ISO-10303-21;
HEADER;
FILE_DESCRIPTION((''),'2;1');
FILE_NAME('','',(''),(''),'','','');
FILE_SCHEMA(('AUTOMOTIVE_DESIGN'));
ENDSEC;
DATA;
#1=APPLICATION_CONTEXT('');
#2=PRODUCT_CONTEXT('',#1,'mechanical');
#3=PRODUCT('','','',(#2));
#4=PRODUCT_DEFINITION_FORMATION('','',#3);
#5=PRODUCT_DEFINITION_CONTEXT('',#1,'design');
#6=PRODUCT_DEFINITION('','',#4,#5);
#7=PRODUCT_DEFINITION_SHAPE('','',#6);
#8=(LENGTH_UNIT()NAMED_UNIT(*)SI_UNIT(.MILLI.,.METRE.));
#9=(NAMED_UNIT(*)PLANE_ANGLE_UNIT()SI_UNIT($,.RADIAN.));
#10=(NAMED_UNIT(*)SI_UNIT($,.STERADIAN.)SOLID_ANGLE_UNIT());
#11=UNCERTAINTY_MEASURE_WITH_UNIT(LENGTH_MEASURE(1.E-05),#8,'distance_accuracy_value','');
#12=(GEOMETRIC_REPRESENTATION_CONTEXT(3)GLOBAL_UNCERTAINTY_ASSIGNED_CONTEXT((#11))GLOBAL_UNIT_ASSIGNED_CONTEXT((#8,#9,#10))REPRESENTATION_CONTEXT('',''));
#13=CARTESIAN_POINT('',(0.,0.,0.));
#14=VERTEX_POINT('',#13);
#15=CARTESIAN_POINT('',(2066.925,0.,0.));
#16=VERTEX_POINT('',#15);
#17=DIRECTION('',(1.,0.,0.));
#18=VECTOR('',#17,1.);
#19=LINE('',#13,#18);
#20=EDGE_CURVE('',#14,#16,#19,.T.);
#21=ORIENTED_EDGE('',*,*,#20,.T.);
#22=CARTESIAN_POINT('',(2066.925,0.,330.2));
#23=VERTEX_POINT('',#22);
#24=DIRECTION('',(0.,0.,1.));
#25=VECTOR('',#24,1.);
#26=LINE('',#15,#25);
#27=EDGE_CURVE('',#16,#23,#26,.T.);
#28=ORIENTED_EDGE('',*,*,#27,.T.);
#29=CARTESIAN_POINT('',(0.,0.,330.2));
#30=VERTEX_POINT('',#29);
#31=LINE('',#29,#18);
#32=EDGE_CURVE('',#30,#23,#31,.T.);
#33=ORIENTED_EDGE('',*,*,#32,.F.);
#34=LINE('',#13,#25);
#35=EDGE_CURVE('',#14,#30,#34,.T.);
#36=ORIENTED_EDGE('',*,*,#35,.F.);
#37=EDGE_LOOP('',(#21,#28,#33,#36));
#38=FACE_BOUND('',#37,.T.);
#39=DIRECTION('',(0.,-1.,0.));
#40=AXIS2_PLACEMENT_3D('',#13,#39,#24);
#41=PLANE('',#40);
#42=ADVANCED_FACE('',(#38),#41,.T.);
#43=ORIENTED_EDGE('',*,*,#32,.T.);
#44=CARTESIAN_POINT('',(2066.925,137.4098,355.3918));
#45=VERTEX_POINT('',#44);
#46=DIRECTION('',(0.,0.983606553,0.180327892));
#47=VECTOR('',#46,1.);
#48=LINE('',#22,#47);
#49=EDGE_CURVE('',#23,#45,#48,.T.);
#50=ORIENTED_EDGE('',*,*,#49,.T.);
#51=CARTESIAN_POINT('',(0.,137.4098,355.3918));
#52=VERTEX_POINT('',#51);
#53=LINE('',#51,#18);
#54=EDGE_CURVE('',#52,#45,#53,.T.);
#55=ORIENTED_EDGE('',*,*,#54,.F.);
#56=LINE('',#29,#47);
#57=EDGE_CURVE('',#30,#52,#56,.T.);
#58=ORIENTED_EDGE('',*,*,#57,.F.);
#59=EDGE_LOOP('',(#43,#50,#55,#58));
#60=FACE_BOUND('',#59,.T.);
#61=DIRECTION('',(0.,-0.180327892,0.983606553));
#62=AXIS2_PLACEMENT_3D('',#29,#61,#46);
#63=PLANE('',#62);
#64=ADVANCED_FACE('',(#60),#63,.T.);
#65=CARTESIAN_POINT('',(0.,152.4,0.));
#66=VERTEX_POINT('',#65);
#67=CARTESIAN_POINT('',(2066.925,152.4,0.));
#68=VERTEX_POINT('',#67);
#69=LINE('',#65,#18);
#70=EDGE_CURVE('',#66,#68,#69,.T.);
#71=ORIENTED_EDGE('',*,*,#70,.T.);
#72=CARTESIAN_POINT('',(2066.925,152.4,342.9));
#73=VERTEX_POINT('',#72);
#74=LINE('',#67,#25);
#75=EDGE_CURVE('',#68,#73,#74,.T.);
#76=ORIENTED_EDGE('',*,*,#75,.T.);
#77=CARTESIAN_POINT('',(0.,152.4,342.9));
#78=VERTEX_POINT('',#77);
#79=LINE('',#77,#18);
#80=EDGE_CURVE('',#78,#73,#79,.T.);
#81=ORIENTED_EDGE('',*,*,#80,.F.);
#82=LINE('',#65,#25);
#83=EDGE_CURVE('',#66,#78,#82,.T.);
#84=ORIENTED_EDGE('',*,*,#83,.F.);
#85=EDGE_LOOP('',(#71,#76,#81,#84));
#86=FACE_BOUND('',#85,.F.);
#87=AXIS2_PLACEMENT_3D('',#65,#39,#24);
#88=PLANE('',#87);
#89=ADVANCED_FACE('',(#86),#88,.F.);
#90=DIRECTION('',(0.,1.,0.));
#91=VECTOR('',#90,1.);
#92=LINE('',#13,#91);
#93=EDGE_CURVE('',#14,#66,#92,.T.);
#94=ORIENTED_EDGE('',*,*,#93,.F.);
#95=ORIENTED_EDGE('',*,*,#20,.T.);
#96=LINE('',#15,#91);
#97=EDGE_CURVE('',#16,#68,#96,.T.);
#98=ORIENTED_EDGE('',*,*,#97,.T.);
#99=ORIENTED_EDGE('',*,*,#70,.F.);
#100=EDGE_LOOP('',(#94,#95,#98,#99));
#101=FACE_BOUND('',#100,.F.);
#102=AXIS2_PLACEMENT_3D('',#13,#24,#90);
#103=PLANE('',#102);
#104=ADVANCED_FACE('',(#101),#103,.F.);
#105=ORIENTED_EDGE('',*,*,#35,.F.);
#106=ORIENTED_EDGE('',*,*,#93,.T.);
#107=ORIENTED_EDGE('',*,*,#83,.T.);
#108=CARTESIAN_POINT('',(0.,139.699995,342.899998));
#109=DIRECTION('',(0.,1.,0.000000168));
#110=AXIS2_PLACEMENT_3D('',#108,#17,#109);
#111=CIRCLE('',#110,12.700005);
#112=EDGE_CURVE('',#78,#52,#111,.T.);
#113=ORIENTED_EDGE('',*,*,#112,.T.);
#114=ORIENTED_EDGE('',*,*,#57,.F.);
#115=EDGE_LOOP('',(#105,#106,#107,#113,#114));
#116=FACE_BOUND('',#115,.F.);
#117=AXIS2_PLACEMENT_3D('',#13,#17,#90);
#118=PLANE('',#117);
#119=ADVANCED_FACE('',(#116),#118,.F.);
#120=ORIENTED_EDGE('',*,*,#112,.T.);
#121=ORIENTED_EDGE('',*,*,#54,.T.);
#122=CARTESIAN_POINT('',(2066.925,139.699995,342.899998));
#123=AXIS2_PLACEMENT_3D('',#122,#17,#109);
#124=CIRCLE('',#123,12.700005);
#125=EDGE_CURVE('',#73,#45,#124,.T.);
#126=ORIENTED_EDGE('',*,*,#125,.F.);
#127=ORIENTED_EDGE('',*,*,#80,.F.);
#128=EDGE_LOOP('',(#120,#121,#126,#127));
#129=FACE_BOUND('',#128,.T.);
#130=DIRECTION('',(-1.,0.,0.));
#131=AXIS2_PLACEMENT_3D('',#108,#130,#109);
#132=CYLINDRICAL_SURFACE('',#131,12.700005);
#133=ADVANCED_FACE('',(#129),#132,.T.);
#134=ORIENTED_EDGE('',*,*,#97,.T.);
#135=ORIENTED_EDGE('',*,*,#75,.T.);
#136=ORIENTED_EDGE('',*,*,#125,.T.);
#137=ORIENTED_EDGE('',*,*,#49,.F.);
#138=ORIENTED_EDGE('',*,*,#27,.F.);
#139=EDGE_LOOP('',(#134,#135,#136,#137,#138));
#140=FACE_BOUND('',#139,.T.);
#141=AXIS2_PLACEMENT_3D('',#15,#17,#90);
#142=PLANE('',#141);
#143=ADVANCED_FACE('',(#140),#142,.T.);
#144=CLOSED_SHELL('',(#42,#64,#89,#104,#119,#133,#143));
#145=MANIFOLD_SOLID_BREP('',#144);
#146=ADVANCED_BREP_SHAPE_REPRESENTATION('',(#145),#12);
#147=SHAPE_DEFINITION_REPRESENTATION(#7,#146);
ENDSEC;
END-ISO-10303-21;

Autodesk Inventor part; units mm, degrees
ref_plane "YZ Plane" through (0, 0, 0) normal (1, 0, 0) x (0, 1, 0)
ref_plane "XZ Plane" through (0, 0, 0) normal (0, 1, 0) x (-1, 0, 0)
ref_plane "XY Plane" through (0, 0, 0) normal (0, 0, 1) x (1, 0, 0)
sketch "Profile" plane through (0, 0, 0) normal (0, 0, 1) x (1, 0, 0)
  line L0 (0, 0) -> (0, 330.2)
  line L1 (0, 0) -> (152.4, 0)
  line L2 (152.4, 0) -> (152.4, 342.9)
  line L3 (152.4, 342.9) -> (139.7, 342.9) construction
  line L4 (152.4, 342.9) -> (139.7, 342.9) construction
  arc A0 (152.4, 342.9) -> (137.4098, 355.3918) centre (139.7, 342.9) ccw
  line L5 (0, 330.2) -> (137.4098, 355.3918)
  dimension "d0" = 330.2
  dimension "d1" = 152.4
  dimension "d2" = 342.9
  dimension "d3" = 12.7
  dimension "d4" = 12.7
sketch "Sketch1" plane through (0, 0, 0) normal (1, 0, 0) x (0, 1, 0)
  line L0 (0, 0) -> (0, 330.2)
  line L1 (0, 0) -> (152.4, 0)
  line L2 (152.4, 0) -> (152.4, 342.9)
  line L3 (152.4, 342.9) -> (139.7, 342.9) construction
  line L4 (152.4, 342.9) -> (139.7, 342.9) construction
  arc A0 (152.4, 342.9) -> (137.4098, 355.3918) centre (139.7, 342.9) ccw
  line L5 (0, 330.2) -> (137.4098, 355.3918)
extrude "Extrusion1" add sketch "Sketch1" along normal blind 2066.925
properties part number "R" material "Granite, Cut, Polished"
